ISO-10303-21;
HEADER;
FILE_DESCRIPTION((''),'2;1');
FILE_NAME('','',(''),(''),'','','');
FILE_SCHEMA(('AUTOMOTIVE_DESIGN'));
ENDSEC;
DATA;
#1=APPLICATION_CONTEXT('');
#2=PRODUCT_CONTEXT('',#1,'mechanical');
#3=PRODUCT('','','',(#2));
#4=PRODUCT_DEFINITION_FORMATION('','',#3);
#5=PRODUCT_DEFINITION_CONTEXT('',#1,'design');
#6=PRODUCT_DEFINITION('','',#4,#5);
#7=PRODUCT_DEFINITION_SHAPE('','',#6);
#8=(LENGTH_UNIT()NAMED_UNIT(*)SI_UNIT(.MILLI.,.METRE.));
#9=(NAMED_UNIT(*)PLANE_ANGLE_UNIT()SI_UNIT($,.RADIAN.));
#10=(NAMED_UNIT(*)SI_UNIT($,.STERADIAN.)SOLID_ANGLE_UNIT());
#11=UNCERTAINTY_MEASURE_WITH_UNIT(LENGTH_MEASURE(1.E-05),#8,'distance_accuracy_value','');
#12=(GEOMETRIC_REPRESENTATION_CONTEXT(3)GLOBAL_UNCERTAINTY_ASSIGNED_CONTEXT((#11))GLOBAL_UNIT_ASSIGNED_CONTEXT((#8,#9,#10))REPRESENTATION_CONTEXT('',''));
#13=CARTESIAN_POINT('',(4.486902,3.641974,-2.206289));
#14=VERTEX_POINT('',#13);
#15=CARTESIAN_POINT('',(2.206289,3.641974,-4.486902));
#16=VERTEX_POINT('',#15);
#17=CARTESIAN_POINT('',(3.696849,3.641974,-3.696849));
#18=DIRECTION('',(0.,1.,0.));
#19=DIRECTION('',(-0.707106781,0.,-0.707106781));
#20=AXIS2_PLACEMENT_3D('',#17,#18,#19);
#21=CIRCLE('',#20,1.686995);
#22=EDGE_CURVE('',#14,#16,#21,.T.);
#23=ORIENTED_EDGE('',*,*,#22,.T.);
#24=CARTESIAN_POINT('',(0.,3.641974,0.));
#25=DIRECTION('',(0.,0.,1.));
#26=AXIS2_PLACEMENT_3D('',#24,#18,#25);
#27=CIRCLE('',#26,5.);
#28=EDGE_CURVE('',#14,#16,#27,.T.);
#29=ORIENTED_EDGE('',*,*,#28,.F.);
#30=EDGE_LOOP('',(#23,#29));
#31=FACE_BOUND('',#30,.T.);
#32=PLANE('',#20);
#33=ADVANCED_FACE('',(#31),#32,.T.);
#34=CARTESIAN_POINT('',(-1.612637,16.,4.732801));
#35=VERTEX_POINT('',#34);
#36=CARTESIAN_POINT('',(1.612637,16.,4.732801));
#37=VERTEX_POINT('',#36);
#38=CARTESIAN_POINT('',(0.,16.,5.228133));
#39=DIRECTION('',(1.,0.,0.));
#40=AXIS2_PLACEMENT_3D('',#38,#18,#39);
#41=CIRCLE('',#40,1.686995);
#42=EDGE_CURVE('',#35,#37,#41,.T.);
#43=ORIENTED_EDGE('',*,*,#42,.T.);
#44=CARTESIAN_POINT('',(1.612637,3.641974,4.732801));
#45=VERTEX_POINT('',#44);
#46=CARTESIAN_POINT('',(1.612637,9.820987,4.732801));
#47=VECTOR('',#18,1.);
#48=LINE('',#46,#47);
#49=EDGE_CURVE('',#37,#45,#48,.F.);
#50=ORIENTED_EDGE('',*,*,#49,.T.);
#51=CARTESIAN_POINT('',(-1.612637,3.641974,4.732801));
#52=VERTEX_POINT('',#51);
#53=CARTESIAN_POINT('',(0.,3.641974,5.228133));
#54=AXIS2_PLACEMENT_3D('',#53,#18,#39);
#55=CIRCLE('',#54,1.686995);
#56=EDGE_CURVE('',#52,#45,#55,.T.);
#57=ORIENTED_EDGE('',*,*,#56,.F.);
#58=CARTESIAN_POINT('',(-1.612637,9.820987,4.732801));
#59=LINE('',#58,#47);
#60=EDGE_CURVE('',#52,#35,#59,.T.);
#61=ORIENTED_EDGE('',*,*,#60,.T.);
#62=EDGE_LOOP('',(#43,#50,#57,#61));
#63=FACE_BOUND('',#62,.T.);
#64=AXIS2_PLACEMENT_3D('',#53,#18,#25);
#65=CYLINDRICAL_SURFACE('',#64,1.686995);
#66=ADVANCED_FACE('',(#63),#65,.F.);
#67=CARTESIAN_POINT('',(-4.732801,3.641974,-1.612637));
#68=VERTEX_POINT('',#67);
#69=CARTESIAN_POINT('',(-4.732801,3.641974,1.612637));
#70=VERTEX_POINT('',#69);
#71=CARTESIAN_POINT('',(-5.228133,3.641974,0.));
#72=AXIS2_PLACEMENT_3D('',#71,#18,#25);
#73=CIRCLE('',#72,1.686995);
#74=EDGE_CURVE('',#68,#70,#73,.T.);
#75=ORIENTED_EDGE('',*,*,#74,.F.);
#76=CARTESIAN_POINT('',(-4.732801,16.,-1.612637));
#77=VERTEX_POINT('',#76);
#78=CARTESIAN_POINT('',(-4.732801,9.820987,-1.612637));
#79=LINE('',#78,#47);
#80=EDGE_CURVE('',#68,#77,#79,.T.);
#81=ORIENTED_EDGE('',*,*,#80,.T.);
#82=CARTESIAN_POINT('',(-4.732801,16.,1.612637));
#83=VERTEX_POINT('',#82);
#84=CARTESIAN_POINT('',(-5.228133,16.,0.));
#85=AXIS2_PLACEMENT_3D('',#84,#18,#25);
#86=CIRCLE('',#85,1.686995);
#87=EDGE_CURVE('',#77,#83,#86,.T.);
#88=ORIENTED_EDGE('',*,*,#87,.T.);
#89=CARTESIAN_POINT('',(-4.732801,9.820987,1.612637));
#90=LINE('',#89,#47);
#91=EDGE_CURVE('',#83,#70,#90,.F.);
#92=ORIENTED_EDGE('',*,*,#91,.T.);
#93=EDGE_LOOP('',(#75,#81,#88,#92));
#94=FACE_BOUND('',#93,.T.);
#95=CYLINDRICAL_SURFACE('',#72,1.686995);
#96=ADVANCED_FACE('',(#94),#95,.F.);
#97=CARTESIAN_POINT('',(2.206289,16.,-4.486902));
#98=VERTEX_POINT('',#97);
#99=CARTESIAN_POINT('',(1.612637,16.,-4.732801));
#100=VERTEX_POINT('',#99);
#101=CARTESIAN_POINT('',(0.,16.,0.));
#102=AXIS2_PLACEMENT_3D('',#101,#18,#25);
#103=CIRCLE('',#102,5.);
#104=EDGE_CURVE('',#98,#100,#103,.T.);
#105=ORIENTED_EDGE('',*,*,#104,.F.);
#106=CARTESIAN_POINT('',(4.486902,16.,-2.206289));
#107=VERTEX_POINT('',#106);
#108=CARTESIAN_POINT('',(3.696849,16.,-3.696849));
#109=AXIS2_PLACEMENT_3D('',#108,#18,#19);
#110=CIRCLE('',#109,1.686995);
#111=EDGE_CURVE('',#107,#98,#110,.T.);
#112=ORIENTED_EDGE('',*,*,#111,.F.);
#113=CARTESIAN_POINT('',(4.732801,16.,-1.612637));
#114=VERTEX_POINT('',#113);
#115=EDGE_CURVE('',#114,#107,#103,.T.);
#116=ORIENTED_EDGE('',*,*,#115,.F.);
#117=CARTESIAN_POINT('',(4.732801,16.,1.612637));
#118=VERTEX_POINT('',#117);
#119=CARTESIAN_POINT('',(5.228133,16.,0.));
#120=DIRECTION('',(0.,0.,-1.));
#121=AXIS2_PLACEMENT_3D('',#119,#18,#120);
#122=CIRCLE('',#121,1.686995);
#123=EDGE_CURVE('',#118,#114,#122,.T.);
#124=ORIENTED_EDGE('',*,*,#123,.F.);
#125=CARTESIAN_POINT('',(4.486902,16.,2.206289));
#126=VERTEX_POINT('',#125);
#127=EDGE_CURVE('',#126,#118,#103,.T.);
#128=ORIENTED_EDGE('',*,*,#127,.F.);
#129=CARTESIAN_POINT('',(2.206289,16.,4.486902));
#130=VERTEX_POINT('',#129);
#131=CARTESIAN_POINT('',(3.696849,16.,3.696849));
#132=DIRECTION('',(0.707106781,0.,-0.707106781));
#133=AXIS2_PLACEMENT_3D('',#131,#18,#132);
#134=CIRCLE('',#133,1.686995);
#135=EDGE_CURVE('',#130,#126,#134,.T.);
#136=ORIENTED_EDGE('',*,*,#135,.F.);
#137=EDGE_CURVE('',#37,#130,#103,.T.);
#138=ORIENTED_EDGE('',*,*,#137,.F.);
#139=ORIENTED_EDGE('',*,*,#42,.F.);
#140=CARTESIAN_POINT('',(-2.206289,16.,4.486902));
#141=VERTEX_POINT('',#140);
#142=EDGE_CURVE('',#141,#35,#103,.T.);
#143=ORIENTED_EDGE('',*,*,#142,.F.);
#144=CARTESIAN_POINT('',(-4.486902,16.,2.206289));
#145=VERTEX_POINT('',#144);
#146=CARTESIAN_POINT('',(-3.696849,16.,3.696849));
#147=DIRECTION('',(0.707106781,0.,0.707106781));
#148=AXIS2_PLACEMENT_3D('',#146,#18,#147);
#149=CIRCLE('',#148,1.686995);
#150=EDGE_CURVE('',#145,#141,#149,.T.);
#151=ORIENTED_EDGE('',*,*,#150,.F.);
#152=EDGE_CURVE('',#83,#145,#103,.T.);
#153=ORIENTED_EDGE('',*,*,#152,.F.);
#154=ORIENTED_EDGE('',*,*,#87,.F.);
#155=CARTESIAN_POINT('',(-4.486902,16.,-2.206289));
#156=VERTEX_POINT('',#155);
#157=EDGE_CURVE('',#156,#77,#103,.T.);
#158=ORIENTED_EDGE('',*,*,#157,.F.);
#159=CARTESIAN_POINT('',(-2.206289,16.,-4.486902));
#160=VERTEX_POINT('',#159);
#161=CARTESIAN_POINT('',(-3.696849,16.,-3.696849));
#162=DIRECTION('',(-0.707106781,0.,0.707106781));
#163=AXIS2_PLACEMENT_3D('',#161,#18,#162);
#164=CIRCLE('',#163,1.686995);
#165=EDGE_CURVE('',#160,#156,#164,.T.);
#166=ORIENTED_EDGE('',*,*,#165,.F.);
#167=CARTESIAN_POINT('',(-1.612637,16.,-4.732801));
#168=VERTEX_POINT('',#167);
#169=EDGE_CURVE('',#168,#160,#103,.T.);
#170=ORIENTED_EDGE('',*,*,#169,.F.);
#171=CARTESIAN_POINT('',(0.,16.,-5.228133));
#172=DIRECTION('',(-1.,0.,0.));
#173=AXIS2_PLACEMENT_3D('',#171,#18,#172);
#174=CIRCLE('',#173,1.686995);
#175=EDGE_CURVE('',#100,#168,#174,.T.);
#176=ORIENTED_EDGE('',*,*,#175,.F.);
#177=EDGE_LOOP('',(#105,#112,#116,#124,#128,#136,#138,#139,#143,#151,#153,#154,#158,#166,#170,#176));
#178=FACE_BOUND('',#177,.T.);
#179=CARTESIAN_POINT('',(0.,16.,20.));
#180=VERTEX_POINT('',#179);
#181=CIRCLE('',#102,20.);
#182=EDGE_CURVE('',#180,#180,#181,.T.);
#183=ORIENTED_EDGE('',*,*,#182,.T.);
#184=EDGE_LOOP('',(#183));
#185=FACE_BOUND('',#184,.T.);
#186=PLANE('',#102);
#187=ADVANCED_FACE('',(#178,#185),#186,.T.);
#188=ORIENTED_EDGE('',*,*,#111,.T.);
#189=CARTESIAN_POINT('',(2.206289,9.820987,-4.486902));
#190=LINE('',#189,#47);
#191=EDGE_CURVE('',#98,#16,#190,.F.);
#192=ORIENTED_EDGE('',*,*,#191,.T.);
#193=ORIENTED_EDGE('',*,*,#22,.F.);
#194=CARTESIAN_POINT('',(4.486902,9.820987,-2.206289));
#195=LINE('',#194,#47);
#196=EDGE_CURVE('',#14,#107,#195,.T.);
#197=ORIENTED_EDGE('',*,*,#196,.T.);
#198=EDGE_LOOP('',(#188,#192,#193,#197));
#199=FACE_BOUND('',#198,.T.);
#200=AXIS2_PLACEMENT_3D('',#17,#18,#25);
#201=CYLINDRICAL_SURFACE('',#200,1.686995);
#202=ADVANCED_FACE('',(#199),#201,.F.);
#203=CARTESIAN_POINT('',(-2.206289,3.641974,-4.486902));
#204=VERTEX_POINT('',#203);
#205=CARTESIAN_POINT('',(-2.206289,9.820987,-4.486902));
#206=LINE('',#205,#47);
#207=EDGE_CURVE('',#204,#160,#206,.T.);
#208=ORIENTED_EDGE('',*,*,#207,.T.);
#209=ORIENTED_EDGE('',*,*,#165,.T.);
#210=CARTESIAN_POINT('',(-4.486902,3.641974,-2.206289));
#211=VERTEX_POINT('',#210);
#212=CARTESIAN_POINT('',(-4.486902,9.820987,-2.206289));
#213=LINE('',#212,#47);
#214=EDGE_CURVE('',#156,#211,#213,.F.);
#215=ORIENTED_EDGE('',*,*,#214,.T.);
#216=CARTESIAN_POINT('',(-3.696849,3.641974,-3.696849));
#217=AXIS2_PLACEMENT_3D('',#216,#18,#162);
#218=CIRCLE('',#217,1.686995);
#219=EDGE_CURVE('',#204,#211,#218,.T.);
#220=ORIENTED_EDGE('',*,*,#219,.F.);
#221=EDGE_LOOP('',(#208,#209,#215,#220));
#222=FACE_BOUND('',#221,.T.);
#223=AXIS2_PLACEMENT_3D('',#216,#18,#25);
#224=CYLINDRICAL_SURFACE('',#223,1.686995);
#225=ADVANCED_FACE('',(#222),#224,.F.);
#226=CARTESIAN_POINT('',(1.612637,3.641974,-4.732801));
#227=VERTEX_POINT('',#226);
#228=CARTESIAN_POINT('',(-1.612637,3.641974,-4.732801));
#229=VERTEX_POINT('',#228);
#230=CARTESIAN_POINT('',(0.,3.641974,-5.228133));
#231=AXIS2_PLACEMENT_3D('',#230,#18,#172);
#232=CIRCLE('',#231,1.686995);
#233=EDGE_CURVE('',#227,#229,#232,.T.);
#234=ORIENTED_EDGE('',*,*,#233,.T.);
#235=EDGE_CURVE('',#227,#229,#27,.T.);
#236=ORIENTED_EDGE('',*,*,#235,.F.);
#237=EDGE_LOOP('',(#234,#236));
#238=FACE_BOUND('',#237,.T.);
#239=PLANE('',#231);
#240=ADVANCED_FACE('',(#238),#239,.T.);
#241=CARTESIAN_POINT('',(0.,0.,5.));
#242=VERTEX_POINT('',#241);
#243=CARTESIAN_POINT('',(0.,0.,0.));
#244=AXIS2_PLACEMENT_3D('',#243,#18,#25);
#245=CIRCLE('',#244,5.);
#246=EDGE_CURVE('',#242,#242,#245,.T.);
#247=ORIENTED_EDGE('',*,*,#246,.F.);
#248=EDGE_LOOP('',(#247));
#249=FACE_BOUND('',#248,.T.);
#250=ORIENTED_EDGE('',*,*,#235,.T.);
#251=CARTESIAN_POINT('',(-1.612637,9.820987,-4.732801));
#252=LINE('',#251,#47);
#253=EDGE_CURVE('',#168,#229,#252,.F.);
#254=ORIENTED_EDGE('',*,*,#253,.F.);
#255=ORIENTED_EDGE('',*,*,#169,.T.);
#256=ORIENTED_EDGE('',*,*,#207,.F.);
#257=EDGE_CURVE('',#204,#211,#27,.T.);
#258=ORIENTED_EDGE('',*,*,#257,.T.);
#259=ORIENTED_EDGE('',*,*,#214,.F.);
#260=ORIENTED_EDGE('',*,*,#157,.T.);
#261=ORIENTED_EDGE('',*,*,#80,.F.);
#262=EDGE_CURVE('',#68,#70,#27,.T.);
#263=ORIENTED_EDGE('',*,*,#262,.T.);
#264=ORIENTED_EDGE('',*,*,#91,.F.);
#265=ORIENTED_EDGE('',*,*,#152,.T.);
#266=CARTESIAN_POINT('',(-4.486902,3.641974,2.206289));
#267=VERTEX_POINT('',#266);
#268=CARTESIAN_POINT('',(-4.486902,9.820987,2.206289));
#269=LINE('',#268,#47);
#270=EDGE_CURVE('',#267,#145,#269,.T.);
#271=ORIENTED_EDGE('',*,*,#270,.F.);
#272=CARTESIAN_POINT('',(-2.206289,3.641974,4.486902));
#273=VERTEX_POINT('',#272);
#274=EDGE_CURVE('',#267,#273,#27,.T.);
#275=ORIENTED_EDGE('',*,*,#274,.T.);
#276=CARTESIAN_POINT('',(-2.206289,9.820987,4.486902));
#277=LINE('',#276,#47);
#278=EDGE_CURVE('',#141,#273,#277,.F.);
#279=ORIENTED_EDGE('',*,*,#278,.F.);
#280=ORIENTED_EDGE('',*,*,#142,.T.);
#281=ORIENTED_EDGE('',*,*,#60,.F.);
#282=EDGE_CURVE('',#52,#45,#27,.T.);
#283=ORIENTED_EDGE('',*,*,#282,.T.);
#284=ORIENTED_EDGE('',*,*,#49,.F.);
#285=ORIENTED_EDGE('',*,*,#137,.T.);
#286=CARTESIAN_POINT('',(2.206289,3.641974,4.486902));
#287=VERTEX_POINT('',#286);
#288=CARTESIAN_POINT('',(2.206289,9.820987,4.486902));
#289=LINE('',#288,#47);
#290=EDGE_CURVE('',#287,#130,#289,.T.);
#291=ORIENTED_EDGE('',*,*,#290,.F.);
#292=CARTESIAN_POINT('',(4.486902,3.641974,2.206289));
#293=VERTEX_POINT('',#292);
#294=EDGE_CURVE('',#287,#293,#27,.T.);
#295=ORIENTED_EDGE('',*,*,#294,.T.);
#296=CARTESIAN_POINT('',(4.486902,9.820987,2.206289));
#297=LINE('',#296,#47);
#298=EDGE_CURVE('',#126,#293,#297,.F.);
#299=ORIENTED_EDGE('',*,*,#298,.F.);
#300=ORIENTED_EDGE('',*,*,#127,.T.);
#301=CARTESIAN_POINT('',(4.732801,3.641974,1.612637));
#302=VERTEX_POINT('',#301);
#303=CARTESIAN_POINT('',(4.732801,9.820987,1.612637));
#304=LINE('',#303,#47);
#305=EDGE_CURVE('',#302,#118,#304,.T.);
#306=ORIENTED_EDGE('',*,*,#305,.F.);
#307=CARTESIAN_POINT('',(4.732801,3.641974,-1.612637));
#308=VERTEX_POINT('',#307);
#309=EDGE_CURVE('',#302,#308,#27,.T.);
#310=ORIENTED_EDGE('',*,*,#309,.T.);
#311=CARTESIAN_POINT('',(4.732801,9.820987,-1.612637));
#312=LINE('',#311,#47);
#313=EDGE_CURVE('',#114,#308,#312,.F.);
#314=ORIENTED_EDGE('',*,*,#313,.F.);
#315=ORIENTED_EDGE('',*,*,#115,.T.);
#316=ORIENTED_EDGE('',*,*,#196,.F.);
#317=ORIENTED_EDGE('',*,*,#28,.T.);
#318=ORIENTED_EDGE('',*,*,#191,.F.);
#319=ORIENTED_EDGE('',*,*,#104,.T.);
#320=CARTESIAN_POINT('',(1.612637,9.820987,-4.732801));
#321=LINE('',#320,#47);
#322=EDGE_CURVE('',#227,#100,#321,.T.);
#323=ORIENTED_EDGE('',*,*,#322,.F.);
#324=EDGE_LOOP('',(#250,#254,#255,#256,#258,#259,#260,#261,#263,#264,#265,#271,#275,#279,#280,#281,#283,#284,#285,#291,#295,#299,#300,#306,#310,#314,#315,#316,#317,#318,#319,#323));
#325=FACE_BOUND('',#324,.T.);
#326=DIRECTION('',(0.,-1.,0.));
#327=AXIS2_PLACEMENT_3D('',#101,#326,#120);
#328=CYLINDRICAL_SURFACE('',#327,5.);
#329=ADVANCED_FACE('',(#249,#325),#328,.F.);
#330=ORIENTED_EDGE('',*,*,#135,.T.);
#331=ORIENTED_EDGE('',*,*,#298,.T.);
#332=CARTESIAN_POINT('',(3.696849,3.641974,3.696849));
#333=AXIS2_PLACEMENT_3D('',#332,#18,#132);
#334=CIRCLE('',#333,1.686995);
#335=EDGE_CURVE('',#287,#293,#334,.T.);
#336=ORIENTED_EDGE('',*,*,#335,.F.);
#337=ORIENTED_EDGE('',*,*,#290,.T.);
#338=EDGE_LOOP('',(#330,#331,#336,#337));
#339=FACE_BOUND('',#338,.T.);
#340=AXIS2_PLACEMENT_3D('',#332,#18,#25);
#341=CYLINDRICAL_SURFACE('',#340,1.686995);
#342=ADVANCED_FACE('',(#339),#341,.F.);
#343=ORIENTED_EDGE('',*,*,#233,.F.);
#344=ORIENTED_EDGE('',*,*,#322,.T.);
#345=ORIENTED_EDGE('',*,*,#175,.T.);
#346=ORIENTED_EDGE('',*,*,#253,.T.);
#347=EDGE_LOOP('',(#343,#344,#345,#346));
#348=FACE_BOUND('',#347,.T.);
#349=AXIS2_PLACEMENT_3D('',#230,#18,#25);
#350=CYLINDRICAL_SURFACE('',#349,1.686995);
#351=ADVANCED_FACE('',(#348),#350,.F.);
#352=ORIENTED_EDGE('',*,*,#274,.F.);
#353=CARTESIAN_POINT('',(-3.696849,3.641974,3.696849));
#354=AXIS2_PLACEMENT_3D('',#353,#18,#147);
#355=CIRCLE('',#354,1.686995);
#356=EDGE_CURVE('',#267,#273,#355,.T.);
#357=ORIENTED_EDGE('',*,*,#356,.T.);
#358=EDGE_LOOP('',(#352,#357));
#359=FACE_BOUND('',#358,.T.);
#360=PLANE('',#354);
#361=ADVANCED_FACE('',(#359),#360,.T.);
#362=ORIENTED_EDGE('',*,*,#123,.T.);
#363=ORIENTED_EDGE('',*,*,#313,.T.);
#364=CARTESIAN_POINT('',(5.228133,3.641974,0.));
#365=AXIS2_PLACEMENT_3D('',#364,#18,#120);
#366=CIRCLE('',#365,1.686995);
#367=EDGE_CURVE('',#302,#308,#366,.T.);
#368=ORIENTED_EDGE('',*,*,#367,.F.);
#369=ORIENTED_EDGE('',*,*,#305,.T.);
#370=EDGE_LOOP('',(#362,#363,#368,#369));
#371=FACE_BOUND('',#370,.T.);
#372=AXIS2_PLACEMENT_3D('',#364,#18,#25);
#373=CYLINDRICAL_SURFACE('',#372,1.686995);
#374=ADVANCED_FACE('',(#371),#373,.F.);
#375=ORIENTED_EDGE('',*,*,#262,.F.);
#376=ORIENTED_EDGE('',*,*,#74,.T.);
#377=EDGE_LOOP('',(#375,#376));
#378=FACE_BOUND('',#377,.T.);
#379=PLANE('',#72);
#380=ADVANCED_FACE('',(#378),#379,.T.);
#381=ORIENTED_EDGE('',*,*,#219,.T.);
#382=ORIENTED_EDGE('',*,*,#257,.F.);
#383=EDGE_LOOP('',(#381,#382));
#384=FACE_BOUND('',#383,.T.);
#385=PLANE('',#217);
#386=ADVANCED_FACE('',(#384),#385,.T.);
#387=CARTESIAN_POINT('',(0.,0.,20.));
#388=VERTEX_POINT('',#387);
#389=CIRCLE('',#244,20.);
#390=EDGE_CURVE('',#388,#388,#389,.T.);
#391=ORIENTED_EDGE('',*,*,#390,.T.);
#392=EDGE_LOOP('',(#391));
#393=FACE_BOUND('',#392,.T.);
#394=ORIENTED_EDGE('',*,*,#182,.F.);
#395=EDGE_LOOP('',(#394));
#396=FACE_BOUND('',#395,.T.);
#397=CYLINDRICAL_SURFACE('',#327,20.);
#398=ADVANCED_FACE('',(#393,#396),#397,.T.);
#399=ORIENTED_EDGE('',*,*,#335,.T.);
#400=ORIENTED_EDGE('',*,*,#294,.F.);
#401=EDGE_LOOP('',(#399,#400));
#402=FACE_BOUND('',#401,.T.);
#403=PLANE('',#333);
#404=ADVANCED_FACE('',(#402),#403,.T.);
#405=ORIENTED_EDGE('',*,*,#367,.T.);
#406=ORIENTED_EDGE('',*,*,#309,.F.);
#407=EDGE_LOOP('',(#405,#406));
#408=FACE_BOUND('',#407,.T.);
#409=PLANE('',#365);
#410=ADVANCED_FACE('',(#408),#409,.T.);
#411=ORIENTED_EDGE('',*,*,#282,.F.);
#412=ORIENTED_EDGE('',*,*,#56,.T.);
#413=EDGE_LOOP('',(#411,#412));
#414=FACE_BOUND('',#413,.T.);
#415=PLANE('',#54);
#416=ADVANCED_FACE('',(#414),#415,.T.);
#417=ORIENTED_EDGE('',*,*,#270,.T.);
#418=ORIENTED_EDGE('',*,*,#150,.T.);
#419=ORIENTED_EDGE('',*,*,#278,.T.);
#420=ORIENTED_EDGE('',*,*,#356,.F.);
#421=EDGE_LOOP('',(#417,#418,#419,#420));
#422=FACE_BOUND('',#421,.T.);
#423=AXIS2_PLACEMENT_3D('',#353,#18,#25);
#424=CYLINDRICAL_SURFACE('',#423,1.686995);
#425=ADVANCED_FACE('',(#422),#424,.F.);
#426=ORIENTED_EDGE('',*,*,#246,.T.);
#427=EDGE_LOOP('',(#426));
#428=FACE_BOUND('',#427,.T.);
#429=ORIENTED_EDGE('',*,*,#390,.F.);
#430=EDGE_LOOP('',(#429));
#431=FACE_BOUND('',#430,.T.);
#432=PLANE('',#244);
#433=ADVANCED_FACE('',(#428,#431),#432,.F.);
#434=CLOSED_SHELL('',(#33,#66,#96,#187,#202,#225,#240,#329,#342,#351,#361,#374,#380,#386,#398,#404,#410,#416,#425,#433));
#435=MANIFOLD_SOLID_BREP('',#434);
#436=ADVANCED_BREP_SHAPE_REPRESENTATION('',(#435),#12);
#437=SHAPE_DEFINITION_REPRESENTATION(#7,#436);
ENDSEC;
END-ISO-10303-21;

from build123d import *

# Parameters (mm, degrees)
SKETCH1_R           = 20
BOSS_EXTRUDE1_DEPTH = 16
SKETCH2_R           = 5
CUT_EXTRUDE1_DEPTH  = 33.496153619
SKETCH3_R           = 1.686994862
CUT_EXTRUDE2_DEPTH  = 12.358026313
CIRPATTERN1_COUNT   = 8


with BuildPart() as part:
    # Sketch1 → Boss-Extrude1 (new body)
    with BuildSketch(Plane(origin=(0, 0, 0), x_dir=(1, 0, 0), z_dir=(0, 1, 0))):
        Circle(SKETCH1_R)
    extrude(amount=BOSS_EXTRUDE1_DEPTH)

    # Sketch2 → Cut-Extrude1 (cut, through all)
    with BuildSketch(Plane(origin=(0, 0, 0), x_dir=(1, 0, 0), z_dir=(0, 1, 0))):
        Circle(SKETCH2_R)
    extrude(amount=CUT_EXTRUDE1_DEPTH, mode=Mode.SUBTRACT)

    # Sketch3 → Cut-Extrude2 (cut)
    with BuildSketch(Plane(origin=(0, 16, 0), x_dir=(1, 0, 0), z_dir=(0, 1, 0))):
        with Locations((-5.228133481, 0)):
            Circle(SKETCH3_R)
    cut_extrude2 = extrude(amount=-CUT_EXTRUDE2_DEPTH, mode=Mode.SUBTRACT)

    # CirPattern1: Cut-Extrude2 ×8 about axis
    cirpattern1_axis = Axis((0, 0, 0), (0, 1, 0))
    for i in range(1, CIRPATTERN1_COUNT):
        add(cut_extrude2.rotate(cirpattern1_axis, i * 360 / CIRPATTERN1_COUNT), mode=Mode.SUBTRACT)


solid = part.part
